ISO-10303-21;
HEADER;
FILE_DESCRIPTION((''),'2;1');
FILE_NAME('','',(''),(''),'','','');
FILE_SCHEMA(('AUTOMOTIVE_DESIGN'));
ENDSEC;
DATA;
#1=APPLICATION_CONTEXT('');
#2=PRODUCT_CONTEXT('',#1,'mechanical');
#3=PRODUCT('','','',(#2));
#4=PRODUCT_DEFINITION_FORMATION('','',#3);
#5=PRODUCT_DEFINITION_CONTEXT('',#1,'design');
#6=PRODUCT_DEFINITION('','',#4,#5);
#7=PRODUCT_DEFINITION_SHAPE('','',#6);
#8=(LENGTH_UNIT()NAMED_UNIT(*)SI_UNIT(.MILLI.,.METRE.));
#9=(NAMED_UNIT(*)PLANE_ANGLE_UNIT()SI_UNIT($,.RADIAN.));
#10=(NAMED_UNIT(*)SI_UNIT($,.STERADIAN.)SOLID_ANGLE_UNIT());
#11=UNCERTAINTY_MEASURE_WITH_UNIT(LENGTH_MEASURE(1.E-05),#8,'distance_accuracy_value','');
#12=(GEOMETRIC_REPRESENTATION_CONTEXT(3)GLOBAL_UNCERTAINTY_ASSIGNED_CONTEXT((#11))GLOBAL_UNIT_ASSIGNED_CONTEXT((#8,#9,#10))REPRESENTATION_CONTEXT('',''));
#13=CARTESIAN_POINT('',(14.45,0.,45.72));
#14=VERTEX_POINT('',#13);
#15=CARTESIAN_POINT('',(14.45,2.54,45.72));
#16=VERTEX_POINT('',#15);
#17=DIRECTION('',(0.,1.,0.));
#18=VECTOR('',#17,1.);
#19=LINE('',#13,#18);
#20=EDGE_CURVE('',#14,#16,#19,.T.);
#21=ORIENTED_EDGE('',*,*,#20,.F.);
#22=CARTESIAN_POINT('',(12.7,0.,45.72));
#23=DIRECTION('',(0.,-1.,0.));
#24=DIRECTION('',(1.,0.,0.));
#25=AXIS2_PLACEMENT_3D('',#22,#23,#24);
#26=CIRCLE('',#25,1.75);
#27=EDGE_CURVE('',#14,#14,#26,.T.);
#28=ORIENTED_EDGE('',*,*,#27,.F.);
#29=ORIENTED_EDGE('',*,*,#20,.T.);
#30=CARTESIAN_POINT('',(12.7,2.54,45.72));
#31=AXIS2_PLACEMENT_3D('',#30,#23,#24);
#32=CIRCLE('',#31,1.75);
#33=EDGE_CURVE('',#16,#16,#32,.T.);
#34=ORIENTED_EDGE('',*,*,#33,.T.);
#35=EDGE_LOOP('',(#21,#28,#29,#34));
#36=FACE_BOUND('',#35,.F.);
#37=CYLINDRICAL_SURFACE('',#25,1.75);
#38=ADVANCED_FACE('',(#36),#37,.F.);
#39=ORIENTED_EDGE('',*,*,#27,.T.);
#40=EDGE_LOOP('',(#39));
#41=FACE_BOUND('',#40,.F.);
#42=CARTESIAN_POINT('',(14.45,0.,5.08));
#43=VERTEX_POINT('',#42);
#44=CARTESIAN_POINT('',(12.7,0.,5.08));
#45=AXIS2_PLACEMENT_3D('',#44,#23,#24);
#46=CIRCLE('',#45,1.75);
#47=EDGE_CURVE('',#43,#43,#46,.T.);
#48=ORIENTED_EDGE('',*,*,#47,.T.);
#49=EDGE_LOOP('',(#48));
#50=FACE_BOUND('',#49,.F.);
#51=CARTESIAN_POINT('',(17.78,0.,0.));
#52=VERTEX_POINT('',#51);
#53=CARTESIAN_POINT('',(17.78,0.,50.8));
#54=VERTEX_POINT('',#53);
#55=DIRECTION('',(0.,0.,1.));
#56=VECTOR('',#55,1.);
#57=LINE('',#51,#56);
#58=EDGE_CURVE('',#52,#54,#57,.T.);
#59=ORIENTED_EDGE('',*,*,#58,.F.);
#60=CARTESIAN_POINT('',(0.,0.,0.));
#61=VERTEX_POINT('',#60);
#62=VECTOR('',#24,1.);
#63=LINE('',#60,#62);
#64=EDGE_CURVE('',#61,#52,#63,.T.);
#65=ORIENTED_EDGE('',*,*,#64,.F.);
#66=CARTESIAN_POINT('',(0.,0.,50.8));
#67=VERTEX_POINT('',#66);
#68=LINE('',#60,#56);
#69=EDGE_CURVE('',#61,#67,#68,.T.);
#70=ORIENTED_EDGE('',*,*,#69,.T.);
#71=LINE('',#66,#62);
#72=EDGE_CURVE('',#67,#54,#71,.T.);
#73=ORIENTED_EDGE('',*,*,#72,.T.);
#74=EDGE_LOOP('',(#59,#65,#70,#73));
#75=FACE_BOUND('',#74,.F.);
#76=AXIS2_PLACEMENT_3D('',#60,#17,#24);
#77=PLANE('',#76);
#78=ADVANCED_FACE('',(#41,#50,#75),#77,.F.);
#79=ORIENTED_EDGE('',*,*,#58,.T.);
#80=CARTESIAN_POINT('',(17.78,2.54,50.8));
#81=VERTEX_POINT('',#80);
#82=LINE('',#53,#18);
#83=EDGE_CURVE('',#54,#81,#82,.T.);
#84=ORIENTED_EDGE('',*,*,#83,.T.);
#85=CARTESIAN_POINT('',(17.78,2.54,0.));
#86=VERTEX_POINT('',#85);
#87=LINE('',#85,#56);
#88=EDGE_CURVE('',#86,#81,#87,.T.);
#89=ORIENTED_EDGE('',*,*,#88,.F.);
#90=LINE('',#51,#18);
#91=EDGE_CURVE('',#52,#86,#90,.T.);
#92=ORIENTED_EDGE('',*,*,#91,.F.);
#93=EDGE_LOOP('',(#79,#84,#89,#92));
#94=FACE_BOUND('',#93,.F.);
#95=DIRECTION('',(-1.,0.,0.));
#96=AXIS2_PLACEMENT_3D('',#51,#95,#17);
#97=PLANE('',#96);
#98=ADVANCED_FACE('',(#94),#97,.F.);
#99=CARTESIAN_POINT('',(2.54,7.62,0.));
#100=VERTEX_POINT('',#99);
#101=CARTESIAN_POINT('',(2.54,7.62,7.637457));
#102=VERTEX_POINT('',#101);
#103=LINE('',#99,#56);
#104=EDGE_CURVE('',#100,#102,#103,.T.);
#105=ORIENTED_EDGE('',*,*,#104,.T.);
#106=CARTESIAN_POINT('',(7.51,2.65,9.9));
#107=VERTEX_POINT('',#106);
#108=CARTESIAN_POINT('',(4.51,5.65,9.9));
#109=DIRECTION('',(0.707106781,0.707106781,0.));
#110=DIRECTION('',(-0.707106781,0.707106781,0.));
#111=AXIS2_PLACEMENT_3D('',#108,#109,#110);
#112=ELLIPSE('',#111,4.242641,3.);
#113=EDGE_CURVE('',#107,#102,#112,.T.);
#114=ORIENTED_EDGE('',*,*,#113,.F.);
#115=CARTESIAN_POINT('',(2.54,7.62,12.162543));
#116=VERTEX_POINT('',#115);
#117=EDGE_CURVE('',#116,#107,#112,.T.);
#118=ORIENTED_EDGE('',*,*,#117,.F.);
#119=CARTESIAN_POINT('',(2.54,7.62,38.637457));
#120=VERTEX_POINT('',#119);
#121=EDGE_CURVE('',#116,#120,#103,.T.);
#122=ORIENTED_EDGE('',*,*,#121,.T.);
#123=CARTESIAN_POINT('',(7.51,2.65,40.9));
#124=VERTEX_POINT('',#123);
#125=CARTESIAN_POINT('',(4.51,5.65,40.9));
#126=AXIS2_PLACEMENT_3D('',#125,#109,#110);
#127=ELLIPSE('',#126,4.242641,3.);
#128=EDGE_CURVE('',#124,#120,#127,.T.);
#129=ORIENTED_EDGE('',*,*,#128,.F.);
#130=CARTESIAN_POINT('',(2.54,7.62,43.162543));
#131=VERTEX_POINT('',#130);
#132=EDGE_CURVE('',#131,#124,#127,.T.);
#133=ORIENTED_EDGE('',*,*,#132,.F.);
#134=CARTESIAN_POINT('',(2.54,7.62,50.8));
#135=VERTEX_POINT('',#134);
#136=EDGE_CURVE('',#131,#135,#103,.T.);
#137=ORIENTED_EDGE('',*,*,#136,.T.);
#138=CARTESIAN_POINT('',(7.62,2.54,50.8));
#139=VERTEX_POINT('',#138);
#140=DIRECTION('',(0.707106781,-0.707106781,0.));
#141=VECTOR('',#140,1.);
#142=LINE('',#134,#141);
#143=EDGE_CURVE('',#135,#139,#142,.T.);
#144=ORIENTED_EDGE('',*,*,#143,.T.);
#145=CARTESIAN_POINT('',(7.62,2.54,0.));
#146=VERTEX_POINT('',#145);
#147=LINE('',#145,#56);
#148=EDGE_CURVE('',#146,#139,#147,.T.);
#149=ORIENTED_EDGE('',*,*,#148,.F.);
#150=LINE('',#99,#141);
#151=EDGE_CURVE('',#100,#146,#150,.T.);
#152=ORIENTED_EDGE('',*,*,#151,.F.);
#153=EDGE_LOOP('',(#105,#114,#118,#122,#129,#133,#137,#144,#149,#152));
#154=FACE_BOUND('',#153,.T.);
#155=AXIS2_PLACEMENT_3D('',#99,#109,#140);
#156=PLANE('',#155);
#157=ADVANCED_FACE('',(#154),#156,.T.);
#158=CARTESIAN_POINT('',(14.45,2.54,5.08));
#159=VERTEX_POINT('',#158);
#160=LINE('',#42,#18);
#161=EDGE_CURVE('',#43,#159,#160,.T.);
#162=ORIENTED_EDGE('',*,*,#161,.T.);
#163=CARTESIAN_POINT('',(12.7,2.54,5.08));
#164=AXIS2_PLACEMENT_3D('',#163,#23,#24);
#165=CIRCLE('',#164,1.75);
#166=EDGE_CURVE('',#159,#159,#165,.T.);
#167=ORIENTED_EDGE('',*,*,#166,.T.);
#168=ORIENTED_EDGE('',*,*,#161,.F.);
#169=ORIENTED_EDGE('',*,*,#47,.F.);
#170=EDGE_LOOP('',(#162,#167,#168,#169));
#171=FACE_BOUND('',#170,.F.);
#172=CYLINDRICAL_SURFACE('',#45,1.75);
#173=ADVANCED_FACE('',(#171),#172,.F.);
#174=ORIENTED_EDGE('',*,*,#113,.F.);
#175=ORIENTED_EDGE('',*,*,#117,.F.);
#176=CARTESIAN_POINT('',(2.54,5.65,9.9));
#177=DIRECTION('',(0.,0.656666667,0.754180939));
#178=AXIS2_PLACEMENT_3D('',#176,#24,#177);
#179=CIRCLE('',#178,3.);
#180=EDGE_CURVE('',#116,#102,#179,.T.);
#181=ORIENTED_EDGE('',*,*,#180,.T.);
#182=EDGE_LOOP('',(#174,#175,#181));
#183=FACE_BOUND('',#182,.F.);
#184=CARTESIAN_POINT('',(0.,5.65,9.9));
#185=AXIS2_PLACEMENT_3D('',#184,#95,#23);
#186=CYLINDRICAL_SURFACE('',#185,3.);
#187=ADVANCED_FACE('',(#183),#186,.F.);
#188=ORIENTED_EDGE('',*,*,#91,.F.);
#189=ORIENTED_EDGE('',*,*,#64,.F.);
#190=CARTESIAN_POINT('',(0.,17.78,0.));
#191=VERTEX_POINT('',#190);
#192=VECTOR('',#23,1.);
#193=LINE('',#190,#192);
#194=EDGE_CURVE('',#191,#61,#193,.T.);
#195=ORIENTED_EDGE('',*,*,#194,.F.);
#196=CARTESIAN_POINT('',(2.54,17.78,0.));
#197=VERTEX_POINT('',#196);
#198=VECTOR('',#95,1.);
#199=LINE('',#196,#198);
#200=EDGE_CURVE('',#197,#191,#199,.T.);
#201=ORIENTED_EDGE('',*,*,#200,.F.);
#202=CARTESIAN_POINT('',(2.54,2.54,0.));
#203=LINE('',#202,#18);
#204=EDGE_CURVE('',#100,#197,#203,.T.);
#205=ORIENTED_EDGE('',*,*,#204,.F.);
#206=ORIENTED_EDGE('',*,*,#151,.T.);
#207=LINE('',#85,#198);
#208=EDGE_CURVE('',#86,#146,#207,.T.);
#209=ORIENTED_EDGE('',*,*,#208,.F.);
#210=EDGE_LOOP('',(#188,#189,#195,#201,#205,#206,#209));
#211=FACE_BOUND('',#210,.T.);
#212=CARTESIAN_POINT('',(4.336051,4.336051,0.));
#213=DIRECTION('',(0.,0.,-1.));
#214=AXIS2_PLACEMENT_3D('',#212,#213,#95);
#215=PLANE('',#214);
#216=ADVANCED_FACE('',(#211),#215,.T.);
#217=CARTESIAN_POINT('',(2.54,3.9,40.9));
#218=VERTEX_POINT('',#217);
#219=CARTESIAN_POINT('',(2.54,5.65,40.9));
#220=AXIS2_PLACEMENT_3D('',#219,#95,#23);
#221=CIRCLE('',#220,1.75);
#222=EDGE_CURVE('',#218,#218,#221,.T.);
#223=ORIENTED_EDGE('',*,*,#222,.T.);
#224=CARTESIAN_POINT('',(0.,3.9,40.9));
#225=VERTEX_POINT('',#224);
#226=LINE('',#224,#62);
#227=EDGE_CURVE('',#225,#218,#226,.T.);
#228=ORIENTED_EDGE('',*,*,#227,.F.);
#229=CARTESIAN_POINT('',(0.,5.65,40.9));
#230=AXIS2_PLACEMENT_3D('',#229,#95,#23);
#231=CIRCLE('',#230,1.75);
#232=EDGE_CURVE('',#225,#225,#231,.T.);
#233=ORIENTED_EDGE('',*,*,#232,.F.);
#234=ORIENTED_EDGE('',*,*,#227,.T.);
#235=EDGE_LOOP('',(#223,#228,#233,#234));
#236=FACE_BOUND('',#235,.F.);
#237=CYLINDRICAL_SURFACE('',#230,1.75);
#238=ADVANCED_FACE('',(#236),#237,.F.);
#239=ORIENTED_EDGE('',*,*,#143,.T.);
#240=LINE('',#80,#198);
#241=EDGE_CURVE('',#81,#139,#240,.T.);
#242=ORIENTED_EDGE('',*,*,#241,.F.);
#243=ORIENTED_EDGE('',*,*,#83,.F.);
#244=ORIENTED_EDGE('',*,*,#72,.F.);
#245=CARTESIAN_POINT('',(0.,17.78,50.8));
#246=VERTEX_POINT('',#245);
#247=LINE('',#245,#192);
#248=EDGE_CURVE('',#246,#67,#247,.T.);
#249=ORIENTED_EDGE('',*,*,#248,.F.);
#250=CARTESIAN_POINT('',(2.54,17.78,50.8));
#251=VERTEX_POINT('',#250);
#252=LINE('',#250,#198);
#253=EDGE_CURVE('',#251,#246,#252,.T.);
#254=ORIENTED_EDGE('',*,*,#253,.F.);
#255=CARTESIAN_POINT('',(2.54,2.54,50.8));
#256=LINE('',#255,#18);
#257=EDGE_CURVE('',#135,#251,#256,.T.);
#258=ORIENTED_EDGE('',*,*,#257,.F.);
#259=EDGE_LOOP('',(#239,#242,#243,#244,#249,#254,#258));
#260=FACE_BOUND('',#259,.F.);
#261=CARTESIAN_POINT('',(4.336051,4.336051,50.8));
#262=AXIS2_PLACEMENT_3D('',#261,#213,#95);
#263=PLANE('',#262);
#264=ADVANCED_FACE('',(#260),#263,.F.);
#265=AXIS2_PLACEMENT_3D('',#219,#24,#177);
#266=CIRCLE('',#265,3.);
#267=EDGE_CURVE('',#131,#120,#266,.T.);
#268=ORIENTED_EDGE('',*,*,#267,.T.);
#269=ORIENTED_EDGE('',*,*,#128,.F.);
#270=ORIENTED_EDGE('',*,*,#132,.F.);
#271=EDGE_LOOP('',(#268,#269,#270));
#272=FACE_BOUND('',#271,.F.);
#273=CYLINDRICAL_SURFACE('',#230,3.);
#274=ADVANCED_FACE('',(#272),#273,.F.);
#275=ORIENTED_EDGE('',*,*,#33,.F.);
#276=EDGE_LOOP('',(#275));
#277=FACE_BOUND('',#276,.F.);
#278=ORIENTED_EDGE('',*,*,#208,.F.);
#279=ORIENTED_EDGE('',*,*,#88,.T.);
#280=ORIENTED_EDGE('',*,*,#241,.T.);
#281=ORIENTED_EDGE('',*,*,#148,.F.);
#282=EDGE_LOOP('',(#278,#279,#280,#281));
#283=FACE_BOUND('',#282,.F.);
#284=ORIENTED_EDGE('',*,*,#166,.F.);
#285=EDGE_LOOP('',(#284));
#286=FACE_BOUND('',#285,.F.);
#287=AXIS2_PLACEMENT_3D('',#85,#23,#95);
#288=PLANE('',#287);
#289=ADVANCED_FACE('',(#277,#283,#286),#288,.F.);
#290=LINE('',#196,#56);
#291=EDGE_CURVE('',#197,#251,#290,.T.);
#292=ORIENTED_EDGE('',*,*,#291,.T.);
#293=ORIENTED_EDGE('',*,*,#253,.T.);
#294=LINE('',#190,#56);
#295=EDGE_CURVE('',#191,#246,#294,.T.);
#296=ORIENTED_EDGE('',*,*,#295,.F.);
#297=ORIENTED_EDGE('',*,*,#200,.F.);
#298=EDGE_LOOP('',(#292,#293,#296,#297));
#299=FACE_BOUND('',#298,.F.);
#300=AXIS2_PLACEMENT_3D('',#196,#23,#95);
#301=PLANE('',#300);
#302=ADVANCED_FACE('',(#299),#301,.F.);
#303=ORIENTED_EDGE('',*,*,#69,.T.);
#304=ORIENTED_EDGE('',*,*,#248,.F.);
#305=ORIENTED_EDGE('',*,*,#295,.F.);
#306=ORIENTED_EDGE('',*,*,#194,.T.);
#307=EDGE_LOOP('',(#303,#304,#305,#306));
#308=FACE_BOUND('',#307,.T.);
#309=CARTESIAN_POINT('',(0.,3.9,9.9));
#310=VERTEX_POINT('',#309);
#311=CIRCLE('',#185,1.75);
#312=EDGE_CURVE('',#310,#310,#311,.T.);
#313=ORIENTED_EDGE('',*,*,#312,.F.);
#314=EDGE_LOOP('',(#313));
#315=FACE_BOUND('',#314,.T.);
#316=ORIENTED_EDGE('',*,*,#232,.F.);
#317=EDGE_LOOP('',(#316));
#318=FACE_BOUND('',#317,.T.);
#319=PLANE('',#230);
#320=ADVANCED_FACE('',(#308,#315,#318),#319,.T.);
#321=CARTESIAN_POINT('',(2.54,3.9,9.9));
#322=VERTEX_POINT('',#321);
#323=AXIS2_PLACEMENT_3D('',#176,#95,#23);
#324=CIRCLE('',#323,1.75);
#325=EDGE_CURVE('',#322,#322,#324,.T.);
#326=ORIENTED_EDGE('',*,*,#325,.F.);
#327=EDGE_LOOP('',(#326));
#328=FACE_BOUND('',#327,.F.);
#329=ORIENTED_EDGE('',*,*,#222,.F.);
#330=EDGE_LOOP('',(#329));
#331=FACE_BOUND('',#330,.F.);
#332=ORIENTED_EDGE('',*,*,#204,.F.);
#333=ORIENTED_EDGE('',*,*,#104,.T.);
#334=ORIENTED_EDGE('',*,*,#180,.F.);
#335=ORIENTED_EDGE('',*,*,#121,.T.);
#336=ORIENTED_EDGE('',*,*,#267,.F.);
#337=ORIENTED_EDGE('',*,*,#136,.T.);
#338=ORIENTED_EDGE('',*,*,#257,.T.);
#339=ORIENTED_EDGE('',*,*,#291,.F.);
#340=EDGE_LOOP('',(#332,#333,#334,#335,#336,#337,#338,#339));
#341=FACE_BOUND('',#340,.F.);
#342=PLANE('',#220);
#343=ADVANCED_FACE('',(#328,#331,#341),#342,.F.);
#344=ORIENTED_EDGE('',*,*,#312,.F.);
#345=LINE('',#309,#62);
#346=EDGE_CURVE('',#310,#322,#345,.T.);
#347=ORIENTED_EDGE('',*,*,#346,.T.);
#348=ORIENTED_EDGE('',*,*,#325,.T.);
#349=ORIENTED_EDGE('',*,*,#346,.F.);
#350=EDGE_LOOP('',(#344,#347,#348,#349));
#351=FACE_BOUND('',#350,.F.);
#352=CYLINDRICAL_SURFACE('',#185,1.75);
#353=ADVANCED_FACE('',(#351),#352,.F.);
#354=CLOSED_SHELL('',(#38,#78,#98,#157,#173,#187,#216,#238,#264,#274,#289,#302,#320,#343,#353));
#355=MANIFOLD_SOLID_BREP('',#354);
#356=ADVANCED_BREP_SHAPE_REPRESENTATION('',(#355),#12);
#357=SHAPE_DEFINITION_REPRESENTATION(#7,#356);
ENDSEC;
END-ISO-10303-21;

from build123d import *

# Parameters (mm, degrees)
F1_DEPTH    = 50.8
F2_R        = 1.75
F3_DEPTH    = 25.4
F5_T4_DEPTH = 50.8
F5_S5_R     = 1.75
F5_T6_DEPTH = 27
F5_S7_R     = 1.75
F5_T8_DEPTH = 27
F2_R_2      = 3
F6_DEPTH    = 7.511
F7_DEPTH    = 2.54
F4_R        = 1.75
F8_DEPTH    = 2.54


# Not quite as in the source:
# - a fillet or chamfer that OpenCascade refuses, or shapes differently, is made with other operations: its cross-section is extruded or revolved along the edge and cut away or added


with BuildPart() as f1:
    # F0 (on Top) → F1 (new body)
    with BuildSketch(Plane.XY):
        Polygon((0, 17.78), (0, 0), (17.78, 0), (17.78, 2.54), (2.54, 2.54), (2.54, 17.78), align=None)
    extrude(amount=F1_DEPTH)

    # F2 (on face) → F3 (cut)
    with BuildSketch(Plane(origin=(0, 0, 0), x_dir=(0, -1, 0), z_dir=(-1, 0, 0))):
        with Locations((-5.65, 9.9)):
            Circle(F2_R)
        with Locations((-5.65, 40.9)):
            Circle(F2_R)
    extrude(amount=-F3_DEPTH, mode=Mode.SUBTRACT)

    # F5: chamfer of 5.08 on 1 edges, made by hand


with BuildPart() as f5_tool2:
    # F5_s3 → F5_t4 (new body)
    with BuildSketch(Plane.XY):
        Polygon((2.54, 7.62), (7.62, 2.54), (2.54, 2.54), align=None)
    extrude(amount=F5_T4_DEPTH)

    # F5_s5 → F5_t6 (cut, symmetric)
    with BuildSketch(Plane.YZ.offset(5.1)):
        with Locations((5.65, 40.9)):
            Circle(F5_S5_R)
    extrude(amount=F5_T6_DEPTH, both=True, mode=Mode.SUBTRACT)

    # F5_s7 → F5_t8 (cut, symmetric)
    with BuildSketch(Plane.YZ.offset(5.1)):
        with Locations((5.65, 9.9)):
            Circle(F5_S7_R)
    extrude(amount=F5_T8_DEPTH, both=True, mode=Mode.SUBTRACT)


with BuildPart() as f1_1:
    add(f1.part)

    # F5_t1: union F5_tool2
    add(f5_tool2.part)

    # F2 (on face) → F6 (cut, through all)
    with BuildSketch(Plane(origin=(0, 0, 0), x_dir=(0, -1, 0), z_dir=(-1, 0, 0))):
        with Locations((-5.65, 40.9)):
            Circle(F2_R_2)
        with Locations((-5.65, 40.9)):
            Circle(F2_R, mode=Mode.SUBTRACT)
        with Locations((-5.65, 9.9)):
            Circle(F2_R_2)
        with Locations((-5.65, 9.9)):
            Circle(F2_R, mode=Mode.SUBTRACT)
    extrude(amount=-F6_DEPTH, mode=Mode.SUBTRACT)

    # F2 (on face) → F7 (join)
    with BuildSketch(Plane(origin=(0, 0, 0), x_dir=(0, -1, 0), z_dir=(-1, 0, 0))):
        with Locations((-5.65, 40.9)):
            Circle(F2_R_2)
        with Locations((-5.65, 40.9)):
            Circle(F2_R, mode=Mode.SUBTRACT)
        with Locations((-5.65, 9.9)):
            Circle(F2_R_2)
        with Locations((-5.65, 9.9)):
            Circle(F2_R, mode=Mode.SUBTRACT)
    extrude(amount=-F7_DEPTH)

    # F4 (on face) → F8 (cut, through all)
    with BuildSketch(Plane.XZ):
        with Locations((12.7, 45.72)):
            Circle(F4_R)
        with Locations((12.7, 5.08)):
            Circle(F4_R)
    extrude(amount=-F8_DEPTH, mode=Mode.SUBTRACT)


solid = f1_1.part
